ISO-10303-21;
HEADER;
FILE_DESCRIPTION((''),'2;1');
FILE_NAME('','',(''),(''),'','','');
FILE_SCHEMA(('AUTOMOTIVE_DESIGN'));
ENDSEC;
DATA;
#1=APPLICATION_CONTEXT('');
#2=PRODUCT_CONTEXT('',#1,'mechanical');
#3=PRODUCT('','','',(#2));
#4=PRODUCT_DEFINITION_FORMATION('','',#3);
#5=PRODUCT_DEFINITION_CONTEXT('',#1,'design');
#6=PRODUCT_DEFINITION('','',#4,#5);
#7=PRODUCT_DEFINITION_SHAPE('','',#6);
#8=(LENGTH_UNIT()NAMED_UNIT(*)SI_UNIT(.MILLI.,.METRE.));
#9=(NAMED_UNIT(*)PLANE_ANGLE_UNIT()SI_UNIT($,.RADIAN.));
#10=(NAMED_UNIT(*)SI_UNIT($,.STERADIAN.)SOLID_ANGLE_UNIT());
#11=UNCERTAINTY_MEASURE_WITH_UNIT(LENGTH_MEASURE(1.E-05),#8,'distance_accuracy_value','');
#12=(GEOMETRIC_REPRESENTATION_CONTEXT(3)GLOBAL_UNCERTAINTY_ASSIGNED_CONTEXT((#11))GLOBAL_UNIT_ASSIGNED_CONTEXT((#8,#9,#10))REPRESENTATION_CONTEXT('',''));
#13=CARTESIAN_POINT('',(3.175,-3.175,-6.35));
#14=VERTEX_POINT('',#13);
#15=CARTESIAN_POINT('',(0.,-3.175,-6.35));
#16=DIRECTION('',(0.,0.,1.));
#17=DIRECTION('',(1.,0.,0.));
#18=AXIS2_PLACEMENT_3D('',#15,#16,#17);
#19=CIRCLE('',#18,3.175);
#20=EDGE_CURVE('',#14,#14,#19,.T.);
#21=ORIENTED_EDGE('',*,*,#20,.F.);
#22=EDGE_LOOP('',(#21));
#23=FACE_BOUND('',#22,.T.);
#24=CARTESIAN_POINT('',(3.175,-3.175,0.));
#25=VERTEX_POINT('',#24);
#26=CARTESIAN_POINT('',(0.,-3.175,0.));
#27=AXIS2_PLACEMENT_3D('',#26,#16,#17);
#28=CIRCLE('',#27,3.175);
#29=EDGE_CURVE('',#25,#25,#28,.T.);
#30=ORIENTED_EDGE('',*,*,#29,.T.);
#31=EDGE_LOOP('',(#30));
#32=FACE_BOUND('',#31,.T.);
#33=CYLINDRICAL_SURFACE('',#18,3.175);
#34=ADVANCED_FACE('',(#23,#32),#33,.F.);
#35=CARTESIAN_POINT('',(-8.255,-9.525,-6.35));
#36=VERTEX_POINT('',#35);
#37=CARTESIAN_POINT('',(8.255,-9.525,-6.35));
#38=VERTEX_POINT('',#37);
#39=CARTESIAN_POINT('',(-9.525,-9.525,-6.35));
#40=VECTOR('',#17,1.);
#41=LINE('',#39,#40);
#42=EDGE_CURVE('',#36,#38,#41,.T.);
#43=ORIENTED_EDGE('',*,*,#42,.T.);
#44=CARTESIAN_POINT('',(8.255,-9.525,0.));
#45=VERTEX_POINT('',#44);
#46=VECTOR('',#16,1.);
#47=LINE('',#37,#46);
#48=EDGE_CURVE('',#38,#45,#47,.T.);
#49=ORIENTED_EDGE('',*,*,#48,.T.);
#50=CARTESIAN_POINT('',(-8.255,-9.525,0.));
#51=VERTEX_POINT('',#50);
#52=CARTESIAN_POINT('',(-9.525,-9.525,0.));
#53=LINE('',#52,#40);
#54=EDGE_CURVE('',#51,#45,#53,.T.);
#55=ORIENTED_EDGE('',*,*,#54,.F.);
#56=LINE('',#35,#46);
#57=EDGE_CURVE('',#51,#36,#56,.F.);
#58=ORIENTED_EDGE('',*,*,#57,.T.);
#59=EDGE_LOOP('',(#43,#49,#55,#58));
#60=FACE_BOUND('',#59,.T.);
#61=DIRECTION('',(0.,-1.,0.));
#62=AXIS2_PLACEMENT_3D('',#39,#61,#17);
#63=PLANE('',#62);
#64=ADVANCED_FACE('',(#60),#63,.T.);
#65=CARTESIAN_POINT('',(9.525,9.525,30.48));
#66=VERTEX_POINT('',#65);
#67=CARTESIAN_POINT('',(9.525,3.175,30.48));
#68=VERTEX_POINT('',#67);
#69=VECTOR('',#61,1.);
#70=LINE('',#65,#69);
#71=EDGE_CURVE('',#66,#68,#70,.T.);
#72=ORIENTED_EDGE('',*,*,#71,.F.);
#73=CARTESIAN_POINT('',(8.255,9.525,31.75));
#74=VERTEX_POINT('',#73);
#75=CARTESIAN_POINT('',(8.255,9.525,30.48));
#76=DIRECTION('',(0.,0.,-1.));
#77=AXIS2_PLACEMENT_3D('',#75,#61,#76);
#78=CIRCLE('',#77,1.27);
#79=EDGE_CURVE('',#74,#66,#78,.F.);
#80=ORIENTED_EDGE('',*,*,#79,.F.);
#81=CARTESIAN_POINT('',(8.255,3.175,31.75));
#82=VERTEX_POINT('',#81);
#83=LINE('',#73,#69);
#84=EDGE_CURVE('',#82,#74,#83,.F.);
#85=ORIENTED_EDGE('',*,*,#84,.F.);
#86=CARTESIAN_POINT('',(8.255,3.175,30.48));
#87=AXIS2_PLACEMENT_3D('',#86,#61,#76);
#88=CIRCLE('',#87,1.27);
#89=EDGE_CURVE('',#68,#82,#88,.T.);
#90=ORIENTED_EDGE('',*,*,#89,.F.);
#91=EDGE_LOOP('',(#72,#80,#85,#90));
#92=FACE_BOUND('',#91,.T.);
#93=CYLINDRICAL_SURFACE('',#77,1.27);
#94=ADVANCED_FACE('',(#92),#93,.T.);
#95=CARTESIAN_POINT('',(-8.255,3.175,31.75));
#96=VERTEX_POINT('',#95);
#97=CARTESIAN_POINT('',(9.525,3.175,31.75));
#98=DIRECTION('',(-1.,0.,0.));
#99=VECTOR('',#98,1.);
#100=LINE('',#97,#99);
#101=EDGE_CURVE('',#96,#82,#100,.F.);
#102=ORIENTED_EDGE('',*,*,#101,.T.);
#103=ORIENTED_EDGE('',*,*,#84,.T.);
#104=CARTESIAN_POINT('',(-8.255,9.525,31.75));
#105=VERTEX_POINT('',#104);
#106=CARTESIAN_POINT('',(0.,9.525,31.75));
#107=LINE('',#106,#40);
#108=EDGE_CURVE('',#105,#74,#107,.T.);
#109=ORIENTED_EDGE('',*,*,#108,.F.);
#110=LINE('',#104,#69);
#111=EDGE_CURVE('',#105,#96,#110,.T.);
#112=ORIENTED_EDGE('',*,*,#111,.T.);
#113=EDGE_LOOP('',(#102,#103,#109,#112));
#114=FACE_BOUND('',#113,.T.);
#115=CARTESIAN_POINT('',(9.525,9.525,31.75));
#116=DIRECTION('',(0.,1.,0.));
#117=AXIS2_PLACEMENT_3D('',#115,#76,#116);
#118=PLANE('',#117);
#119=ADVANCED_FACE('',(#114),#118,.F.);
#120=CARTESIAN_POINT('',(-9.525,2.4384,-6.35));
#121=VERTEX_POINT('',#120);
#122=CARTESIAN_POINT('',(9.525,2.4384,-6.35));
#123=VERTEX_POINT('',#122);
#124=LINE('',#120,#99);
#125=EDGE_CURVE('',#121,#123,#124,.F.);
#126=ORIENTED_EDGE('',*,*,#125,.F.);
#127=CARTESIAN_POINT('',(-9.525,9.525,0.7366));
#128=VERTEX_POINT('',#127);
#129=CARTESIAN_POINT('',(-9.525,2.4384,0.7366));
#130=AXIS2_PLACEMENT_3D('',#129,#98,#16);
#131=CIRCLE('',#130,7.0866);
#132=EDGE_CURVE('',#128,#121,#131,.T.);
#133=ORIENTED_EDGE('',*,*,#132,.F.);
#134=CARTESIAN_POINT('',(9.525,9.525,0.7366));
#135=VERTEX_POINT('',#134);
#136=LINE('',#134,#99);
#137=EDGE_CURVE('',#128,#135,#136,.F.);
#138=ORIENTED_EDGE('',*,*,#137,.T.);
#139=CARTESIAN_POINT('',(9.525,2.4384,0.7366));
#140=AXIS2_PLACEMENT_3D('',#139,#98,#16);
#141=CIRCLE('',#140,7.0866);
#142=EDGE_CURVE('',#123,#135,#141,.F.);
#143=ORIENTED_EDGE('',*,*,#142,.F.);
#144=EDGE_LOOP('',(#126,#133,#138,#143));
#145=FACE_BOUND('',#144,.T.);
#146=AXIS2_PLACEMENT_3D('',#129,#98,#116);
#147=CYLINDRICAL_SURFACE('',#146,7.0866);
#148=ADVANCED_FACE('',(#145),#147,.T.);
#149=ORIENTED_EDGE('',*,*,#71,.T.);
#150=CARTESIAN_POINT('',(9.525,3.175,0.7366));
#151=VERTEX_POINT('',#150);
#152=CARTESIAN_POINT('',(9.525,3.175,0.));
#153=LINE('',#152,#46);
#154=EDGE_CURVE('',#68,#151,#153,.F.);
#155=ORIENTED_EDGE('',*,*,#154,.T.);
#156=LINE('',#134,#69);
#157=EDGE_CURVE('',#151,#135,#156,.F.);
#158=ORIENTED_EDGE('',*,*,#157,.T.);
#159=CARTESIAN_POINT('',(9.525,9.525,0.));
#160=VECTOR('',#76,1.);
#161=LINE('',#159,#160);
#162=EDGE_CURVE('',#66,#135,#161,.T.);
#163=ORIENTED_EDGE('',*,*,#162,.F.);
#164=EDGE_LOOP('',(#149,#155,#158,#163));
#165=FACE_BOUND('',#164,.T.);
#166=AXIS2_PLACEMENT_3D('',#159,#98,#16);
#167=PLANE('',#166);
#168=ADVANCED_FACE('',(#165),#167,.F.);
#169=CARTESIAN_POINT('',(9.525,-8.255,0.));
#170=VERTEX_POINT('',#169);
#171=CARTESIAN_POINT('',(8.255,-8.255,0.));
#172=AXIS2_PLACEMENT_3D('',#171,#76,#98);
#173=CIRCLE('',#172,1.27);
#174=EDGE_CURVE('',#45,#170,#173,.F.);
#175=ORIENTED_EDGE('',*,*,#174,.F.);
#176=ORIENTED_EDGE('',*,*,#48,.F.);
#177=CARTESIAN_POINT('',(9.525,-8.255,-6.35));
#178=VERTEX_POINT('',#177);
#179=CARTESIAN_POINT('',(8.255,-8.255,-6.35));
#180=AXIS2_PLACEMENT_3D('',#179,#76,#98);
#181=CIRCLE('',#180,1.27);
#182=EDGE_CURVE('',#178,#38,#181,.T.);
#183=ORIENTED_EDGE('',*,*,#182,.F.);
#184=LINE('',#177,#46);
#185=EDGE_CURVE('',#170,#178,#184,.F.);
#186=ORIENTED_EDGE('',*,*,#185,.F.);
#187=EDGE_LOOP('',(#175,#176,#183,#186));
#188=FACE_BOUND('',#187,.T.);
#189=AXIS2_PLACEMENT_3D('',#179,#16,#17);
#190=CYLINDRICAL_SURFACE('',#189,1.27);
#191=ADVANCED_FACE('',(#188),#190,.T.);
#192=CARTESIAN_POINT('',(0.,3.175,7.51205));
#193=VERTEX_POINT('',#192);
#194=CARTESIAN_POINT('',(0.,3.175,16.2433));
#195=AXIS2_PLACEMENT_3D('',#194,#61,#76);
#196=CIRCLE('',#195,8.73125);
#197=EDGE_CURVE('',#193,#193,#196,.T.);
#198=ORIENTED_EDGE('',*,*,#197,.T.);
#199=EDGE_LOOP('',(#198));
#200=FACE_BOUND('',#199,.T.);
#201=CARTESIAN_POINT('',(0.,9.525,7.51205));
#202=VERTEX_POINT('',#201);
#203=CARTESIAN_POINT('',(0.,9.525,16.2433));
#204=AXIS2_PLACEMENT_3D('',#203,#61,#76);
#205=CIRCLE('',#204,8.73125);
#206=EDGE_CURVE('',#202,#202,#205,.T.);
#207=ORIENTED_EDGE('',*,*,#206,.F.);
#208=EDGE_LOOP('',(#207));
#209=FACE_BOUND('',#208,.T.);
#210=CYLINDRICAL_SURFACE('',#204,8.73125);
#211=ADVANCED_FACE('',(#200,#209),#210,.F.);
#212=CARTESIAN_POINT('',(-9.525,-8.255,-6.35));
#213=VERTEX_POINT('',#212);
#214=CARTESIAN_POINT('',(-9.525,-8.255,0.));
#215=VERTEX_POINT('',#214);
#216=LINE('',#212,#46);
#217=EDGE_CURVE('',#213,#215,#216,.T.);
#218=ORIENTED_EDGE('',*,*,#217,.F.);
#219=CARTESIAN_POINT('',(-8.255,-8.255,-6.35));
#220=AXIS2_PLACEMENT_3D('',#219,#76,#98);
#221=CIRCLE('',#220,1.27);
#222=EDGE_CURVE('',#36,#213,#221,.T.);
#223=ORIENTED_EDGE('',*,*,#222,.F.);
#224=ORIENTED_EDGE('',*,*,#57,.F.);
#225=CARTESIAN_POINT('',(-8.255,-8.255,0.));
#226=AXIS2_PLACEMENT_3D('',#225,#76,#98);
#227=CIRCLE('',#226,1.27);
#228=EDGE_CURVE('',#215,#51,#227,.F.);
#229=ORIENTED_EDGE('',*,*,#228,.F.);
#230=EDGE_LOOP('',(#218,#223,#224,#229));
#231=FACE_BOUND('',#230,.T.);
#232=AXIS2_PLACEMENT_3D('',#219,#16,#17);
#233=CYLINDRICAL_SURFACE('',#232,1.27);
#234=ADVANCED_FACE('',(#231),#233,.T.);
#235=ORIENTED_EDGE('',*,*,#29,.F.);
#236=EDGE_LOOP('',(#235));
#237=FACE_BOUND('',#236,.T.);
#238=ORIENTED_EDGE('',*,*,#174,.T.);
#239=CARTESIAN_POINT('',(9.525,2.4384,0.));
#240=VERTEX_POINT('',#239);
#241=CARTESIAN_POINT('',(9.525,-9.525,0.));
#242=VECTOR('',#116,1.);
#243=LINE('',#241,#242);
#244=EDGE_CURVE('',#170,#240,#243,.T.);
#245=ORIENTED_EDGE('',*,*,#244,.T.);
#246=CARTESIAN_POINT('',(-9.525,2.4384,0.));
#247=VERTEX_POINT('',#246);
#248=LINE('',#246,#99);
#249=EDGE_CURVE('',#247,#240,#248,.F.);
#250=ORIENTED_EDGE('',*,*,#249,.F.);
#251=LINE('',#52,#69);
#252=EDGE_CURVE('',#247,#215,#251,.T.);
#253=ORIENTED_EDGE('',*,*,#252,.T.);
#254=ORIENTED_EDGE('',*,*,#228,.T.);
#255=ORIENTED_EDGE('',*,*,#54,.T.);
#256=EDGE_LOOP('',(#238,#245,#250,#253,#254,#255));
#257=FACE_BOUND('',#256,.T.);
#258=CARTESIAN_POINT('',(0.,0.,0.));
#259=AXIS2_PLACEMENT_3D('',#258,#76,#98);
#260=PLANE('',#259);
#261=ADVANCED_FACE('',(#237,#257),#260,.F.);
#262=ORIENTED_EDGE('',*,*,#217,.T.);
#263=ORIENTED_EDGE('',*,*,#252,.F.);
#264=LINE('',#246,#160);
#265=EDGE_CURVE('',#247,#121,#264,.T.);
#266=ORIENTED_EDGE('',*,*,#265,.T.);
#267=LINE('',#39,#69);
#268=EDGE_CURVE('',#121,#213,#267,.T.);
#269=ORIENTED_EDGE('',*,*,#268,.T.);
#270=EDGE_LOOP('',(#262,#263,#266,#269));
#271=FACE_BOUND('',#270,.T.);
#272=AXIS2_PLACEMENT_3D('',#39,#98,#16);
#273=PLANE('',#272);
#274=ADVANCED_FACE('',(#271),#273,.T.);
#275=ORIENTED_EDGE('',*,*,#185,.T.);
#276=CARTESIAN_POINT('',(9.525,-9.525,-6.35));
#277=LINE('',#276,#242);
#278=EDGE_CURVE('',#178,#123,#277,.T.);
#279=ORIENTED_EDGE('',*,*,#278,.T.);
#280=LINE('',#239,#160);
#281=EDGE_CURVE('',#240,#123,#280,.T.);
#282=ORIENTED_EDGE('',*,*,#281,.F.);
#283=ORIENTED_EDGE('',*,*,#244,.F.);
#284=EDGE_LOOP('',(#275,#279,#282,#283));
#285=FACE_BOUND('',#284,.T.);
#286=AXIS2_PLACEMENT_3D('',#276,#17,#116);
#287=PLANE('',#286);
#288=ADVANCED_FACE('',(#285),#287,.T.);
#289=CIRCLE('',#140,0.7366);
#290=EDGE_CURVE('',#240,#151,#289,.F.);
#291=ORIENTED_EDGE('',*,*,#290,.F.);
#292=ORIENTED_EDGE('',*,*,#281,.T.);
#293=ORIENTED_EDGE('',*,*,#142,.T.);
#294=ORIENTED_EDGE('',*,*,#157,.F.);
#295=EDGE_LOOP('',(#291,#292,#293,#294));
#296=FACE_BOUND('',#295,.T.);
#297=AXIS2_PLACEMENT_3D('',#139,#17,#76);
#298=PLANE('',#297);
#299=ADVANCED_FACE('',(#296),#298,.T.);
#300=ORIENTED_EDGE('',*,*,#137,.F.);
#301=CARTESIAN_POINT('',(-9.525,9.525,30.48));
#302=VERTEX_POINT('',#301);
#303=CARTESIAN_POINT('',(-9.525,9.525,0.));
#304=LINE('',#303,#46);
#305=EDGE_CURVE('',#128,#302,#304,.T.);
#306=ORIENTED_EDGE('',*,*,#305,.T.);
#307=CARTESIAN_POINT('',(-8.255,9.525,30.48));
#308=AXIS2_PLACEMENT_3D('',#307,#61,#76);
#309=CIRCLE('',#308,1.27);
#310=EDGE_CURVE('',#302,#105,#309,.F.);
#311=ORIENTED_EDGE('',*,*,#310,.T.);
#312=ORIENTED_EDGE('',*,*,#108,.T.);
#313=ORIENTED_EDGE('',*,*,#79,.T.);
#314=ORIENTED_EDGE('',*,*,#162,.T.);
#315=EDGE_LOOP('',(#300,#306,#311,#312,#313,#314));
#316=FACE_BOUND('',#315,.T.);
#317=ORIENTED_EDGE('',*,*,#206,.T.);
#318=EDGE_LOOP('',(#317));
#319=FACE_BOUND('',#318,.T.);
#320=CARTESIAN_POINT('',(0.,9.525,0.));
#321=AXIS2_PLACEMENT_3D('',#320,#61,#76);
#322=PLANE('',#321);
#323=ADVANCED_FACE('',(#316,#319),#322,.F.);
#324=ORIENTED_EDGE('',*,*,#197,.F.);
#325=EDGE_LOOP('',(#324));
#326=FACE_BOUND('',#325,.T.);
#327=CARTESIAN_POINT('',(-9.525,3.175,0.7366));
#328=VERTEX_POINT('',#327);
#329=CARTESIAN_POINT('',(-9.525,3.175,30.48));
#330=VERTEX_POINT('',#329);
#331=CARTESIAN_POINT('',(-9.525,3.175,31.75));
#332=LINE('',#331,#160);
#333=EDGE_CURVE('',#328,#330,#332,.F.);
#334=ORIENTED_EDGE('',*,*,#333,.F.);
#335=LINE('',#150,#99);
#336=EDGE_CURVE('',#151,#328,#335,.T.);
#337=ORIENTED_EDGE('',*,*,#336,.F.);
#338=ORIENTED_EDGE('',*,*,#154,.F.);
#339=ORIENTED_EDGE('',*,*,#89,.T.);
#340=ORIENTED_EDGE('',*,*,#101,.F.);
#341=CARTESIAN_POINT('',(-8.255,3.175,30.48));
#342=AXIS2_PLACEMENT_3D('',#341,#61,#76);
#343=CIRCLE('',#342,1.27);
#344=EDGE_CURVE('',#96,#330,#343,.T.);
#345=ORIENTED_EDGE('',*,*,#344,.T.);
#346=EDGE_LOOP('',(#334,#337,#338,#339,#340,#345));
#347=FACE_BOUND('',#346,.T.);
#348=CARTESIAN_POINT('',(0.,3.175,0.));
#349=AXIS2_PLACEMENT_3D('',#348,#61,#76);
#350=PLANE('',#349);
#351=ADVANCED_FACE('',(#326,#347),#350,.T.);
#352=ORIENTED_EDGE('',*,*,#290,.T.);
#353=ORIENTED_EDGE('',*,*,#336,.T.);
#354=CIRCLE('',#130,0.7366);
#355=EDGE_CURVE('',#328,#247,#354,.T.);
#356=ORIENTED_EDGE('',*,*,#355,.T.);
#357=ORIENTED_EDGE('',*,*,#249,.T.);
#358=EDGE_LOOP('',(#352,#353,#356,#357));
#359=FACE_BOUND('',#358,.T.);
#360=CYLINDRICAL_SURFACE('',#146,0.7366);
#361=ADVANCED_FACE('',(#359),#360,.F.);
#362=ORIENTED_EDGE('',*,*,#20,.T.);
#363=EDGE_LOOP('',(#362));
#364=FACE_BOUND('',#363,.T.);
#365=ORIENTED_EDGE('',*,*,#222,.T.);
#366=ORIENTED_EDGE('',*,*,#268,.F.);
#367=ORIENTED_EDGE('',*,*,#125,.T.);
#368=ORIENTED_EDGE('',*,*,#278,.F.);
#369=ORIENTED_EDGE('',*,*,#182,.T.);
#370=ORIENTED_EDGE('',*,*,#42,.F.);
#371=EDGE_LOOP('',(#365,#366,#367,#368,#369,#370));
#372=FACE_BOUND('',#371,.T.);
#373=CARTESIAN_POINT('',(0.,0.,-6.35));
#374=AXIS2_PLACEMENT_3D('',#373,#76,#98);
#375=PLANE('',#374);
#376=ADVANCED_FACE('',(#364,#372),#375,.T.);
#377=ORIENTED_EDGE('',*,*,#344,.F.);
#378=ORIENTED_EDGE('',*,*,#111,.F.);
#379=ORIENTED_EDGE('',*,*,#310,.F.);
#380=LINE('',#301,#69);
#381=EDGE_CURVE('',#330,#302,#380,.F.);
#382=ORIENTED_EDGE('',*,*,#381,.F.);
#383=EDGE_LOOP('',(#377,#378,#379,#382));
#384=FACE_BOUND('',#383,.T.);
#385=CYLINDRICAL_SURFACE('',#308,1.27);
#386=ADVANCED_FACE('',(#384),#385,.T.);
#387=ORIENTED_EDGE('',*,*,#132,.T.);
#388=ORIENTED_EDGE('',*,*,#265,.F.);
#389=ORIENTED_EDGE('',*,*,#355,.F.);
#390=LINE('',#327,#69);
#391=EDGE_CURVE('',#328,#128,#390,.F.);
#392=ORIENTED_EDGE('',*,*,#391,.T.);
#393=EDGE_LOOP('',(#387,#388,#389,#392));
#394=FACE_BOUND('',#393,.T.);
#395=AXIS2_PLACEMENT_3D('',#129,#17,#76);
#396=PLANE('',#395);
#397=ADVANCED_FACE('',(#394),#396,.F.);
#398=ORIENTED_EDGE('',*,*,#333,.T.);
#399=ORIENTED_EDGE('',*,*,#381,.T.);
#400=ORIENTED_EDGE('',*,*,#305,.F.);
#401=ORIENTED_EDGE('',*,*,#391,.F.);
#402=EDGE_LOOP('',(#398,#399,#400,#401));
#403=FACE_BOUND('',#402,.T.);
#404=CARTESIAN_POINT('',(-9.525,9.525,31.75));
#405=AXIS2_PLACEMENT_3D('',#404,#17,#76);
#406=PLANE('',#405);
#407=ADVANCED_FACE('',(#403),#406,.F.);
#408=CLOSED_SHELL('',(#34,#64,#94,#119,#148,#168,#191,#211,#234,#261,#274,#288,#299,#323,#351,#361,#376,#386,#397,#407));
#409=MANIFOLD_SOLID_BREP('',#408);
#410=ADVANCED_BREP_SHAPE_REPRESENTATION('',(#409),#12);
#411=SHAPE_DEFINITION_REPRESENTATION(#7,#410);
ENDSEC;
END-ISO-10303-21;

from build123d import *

# Parameters (mm, degrees)
BASE_FLANGE1_START           = -6.35
BASE_FLANGE1_OUTLINE_W       = 19.05
BASE_FLANGE1_OUTLINE_H       = 19.05
BASE_FLANGE1_OUTLINE_R       = 3.175
BASE_FLANGE1_DEPTH           = 6.35
EDGE_FLANGE1_STRIP_W         = 26.8732
EDGE_FLANGE1_STRIP_H         = 6.35
EDGE_FLANGE1_STRIP_CUT_DEPTH = 19.05
EDGE_FLANGE1_DEPTH           = 19.05
SKETCH9_R                    = 8.73125
CUT_EXTRUDE1_DEPTH           = 36.497579143
FILLET2_R                    = 1.27


# Read off the part's stored shape, not the designer's step: Base-Flange1
# Sheet-metal steps are written as plain solids
with BuildPart() as part:
    # Base-Flange1 outline → Base-Flange1 (new body)
    with BuildSketch(Plane.XY.offset(BASE_FLANGE1_START)):
        Rectangle(BASE_FLANGE1_OUTLINE_W, BASE_FLANGE1_OUTLINE_H)
        with Locations((0, -3.175)):
            Circle(BASE_FLANGE1_OUTLINE_R, mode=Mode.SUBTRACT)
    extrude(amount=BASE_FLANGE1_DEPTH)

    # Edge-Flange1 strip (across the edge) → Edge-Flange1 strip cut (cut)
    with BuildSketch(Plane(origin=(9.525, 9.525, 0), x_dir=(0, -1, 0), z_dir=(-1, 0, 0))):
        with Locations((-6.35, -3.175)):
            Rectangle(EDGE_FLANGE1_STRIP_W, EDGE_FLANGE1_STRIP_H)
    extrude(amount=EDGE_FLANGE1_STRIP_CUT_DEPTH, mode=Mode.SUBTRACT)

    # Edge-Flange1 section (across the edge) → Edge-Flange1 (add)
    with BuildSketch(Plane(origin=(9.525, 9.525, 0), x_dir=(0, -1, 0), z_dir=(-1, 0, 0))):
        with BuildLine():
            Line((0, 0.7366), (0, 31.75))
            Line((0, 31.75), (6.35, 31.75))
            Line((6.35, 31.75), (6.35, 0.7366))
            ThreePointArc((6.35, 0.7366), (6.565745145, 0.215745145), (7.0866, 0))
            Line((7.0866, 0), (7.0866, -6.35))
            ThreePointArc((7.0866, -6.35), (2.075617084, -4.274382916), (0, 0.7366))
        make_face()
    extrude(amount=EDGE_FLANGE1_DEPTH)

    # Sketch9 → Cut-Extrude1 (cut, through all)
    with BuildSketch(Plane.XZ.offset(-3.175)):
        with Locations(Location((0, 16.2433, 0), (0, 0, 270))):
            Circle(SKETCH9_R)
    extrude(amount=-CUT_EXTRUDE1_DEPTH, mode=Mode.SUBTRACT)

    # Fillet2
    fillet2_edges = [part.edges().sort_by_distance(p)[0] for p in [
        (9.525, 6.35, 31.75),
        (-9.525, 6.35, 31.75),
        (9.525, -9.525, -3.175),
        (-9.525, -9.525, -3.175),
    ]]
    fillet(fillet2_edges, radius=FILLET2_R)


solid = part.part
